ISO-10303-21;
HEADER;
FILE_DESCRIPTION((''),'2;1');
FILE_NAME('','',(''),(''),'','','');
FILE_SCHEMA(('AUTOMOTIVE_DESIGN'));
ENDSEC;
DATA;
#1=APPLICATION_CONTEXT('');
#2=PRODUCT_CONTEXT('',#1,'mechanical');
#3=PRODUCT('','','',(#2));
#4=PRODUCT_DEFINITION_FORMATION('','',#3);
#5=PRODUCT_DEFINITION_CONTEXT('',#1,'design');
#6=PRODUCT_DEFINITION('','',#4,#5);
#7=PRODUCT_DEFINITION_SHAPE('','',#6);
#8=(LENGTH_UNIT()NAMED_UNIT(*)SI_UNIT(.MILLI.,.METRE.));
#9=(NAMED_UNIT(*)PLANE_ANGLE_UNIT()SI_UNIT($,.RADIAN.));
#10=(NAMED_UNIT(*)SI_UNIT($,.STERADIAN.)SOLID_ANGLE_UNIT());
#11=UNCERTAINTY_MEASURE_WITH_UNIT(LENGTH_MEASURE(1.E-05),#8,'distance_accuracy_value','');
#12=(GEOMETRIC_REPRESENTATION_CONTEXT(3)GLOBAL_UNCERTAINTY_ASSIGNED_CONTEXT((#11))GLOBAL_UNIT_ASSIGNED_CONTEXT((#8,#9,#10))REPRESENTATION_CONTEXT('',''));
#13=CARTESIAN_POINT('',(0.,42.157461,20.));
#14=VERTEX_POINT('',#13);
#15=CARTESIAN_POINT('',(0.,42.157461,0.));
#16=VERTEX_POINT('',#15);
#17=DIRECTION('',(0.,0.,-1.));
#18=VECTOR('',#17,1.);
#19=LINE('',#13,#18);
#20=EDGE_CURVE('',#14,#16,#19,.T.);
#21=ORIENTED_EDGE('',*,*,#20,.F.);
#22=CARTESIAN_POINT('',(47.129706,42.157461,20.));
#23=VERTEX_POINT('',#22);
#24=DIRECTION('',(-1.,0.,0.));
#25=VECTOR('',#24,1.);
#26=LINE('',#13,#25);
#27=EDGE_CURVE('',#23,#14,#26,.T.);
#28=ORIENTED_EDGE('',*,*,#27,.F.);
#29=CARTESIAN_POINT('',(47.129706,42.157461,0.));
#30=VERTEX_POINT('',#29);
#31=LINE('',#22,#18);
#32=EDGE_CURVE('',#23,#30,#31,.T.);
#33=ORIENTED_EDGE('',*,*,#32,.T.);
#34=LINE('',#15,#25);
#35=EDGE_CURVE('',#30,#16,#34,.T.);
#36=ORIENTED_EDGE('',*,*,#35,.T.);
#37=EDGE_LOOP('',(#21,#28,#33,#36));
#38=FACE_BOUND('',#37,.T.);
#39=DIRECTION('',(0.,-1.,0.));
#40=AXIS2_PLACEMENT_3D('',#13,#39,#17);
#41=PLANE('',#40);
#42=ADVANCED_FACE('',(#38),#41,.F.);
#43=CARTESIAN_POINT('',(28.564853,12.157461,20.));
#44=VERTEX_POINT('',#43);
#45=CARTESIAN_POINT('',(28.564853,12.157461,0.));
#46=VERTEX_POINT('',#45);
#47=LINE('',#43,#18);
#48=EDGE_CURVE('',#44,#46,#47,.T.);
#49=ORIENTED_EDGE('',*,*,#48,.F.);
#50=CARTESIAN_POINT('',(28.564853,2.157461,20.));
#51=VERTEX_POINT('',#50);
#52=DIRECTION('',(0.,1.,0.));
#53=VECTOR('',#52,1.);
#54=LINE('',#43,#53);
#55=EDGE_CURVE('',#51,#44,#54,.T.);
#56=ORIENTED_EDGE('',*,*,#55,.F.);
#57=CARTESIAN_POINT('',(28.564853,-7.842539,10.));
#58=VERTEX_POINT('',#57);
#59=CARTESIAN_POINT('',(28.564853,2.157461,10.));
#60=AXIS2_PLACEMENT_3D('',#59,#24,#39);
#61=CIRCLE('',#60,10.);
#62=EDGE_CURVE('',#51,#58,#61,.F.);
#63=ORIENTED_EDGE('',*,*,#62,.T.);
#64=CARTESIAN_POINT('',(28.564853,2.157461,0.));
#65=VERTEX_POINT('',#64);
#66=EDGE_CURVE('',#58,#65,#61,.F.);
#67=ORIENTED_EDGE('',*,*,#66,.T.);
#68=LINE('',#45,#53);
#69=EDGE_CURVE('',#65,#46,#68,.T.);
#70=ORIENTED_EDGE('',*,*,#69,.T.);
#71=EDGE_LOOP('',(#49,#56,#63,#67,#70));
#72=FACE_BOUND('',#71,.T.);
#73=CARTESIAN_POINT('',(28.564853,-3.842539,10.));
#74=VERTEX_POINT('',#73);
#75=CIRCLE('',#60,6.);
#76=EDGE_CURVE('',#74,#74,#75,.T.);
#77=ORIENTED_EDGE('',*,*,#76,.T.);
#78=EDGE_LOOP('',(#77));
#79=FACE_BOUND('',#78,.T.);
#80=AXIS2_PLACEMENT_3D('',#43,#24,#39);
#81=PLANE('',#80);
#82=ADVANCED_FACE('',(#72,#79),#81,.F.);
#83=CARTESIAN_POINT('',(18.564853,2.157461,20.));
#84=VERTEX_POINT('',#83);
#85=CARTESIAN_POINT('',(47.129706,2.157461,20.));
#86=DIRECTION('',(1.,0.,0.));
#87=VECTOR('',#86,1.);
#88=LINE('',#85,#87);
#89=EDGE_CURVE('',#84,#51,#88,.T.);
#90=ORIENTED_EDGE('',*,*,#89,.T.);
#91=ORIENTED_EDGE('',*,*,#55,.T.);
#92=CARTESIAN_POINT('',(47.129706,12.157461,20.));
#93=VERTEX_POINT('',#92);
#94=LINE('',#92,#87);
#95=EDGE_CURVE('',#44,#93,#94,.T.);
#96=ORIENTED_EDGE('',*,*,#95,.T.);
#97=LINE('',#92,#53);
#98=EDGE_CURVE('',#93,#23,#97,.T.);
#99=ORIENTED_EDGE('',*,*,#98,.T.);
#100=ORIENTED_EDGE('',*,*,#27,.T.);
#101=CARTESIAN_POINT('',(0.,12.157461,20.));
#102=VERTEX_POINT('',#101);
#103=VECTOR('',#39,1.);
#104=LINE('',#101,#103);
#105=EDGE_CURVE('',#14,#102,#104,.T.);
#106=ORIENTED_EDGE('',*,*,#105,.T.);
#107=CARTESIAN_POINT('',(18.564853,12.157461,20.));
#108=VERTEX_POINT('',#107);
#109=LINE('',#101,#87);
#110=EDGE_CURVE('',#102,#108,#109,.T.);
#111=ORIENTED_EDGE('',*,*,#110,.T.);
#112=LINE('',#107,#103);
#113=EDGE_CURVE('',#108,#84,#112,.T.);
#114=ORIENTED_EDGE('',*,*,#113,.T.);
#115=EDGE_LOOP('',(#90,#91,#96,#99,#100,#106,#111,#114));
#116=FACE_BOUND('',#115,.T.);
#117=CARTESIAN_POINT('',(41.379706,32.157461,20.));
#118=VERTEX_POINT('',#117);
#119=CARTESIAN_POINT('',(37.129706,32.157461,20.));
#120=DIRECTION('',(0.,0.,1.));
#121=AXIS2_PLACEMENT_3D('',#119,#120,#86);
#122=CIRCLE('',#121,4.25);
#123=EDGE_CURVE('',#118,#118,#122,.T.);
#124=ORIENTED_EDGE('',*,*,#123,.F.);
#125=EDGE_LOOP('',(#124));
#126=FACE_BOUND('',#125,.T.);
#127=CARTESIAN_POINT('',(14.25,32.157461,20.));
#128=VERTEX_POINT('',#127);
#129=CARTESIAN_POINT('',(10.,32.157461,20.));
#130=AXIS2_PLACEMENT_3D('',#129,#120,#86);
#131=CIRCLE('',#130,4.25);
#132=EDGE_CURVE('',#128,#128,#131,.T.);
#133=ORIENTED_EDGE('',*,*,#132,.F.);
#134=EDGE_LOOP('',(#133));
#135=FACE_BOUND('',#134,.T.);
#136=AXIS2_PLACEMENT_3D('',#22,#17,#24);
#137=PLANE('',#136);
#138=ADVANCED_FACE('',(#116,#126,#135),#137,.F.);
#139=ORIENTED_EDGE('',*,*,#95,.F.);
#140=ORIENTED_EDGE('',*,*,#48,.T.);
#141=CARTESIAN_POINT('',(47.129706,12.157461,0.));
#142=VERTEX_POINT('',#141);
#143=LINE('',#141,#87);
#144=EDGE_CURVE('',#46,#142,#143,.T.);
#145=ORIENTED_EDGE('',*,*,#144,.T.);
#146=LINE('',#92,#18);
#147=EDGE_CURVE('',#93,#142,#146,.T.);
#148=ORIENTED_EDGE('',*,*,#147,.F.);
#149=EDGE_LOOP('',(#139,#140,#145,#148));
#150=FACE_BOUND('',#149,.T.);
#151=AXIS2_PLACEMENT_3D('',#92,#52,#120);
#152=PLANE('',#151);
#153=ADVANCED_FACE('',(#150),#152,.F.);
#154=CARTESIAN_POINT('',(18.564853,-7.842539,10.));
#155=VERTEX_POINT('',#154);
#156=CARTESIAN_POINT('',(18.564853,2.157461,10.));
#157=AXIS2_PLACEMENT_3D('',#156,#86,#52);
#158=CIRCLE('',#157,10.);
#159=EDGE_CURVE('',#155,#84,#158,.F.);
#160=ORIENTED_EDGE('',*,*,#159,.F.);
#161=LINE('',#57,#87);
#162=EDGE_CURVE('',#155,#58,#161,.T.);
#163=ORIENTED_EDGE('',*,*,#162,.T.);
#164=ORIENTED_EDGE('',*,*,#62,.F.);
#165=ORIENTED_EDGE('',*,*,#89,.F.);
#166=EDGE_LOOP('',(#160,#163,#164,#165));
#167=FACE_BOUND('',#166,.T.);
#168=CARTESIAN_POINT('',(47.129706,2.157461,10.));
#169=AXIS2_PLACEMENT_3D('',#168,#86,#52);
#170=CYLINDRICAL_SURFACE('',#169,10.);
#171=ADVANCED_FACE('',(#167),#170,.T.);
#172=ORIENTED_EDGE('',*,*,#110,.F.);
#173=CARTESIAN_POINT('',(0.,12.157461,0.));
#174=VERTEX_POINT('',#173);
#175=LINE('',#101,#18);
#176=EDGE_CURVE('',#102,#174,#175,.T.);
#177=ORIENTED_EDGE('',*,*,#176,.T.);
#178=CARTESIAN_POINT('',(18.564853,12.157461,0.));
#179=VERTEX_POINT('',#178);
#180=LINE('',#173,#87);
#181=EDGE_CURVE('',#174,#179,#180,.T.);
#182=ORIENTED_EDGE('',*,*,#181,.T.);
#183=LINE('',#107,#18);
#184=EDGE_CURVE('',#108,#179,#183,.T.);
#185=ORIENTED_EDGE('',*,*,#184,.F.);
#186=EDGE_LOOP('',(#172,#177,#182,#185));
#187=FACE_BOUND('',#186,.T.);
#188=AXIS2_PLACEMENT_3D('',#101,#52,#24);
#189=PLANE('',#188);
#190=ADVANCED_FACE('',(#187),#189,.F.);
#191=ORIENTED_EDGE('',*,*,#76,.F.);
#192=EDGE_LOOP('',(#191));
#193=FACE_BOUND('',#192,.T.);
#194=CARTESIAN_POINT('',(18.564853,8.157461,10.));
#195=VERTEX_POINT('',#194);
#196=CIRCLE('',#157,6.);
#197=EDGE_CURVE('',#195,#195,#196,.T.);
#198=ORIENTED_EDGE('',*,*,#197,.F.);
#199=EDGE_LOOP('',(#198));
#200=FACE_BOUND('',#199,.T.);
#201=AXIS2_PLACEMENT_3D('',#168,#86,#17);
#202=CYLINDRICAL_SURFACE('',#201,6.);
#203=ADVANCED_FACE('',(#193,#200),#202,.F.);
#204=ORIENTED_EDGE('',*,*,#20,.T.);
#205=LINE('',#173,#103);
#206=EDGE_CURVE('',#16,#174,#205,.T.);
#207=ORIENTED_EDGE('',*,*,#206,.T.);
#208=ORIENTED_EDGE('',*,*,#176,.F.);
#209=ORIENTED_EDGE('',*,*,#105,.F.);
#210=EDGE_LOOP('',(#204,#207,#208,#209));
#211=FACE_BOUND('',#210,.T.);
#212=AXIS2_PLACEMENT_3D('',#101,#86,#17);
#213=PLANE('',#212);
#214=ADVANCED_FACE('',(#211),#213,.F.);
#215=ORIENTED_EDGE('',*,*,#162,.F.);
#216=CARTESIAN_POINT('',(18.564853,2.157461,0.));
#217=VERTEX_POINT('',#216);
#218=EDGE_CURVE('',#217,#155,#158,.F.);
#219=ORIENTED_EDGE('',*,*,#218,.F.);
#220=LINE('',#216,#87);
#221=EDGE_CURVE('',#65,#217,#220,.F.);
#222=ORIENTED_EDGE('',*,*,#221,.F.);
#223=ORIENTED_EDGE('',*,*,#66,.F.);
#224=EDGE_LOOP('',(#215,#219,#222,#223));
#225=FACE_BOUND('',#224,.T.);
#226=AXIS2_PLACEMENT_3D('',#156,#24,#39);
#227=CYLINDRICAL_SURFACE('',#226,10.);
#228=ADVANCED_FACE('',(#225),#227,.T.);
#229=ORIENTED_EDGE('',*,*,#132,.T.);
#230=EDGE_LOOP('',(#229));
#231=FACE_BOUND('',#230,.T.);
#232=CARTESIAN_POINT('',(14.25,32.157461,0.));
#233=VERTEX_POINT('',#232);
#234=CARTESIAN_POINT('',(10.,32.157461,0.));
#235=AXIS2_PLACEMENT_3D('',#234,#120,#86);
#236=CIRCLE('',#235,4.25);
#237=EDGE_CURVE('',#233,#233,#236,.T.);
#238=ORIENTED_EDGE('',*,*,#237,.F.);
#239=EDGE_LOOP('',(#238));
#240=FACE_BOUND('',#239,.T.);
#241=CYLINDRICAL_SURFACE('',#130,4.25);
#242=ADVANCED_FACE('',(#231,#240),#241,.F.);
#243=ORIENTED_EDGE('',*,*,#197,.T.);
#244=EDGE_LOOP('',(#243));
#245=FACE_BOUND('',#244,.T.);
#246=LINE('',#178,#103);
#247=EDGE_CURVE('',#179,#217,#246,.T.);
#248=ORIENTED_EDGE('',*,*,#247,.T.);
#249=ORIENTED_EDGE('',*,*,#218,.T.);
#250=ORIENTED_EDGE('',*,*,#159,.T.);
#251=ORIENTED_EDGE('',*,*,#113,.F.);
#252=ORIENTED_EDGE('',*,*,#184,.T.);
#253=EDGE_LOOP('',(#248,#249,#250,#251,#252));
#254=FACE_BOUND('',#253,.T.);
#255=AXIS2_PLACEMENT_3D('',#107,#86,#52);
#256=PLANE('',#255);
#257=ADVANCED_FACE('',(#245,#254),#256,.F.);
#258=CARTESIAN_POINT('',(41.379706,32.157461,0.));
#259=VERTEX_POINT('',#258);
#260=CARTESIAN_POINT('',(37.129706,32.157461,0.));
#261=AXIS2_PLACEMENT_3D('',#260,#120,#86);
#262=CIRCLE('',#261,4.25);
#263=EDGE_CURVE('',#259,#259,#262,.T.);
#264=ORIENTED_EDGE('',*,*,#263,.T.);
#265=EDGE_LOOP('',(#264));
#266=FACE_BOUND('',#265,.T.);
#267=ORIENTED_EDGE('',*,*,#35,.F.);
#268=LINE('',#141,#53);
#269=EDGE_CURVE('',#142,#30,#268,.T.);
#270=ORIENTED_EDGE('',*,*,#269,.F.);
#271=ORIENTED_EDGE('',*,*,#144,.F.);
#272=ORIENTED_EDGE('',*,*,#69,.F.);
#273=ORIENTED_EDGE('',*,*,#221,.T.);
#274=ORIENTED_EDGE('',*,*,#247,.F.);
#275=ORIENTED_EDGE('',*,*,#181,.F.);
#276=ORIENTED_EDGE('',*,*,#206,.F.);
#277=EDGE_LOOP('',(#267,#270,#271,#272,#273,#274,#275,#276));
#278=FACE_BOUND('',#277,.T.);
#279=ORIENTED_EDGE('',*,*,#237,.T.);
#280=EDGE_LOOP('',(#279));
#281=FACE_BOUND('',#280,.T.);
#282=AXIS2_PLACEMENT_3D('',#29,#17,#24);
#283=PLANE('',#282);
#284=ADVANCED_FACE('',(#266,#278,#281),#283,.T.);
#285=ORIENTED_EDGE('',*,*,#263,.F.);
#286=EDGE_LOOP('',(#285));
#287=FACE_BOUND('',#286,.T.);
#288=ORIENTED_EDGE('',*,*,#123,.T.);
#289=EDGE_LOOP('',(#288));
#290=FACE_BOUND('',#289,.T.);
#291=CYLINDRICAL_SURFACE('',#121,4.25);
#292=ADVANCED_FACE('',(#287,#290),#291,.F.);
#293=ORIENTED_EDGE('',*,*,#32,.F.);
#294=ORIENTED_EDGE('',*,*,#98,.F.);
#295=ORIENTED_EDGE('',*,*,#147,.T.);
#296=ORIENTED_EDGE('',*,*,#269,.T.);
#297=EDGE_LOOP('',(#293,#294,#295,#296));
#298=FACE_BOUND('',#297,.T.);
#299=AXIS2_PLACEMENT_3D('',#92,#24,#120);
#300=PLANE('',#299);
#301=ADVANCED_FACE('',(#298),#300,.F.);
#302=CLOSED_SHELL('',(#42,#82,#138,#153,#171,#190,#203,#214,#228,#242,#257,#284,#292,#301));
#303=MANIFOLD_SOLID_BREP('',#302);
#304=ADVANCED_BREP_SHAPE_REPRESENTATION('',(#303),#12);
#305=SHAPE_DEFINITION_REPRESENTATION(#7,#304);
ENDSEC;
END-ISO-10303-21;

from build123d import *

# Parameters (mm, degrees)
EXTRUDE1_DEPTH                 = 20
F_12_0_12_DIAMETER_HOLE1_D     = 12
F_12_0_12_DIAMETER_HOLE1_DEPTH = 47.13
F_12_0_12_DIAMETER_HOLE1_TIP   = 3.605163714
F_8_5_8_5_DIAMETER_HOLE2_D     = 8.5
FILLET1_R                      = 10


with BuildPart() as part:
    # Sketch1 → Extrude1 (new body)
    with BuildSketch(Plane.XY):
        Polygon((0, 12.157460585), (18.564852768, 12.157460585), (18.564852768, -7.842539415), (28.564852768, -7.842539415), (28.564852768, 12.157460585), (47.129705535, 12.157460585), (47.129705535, 42.157460585), (0, 42.157460585), align=None)
    extrude(amount=EXTRUDE1_DEPTH)

    # Ø12.0 (12) Diameter Hole1
    with Locations(Plane(origin=(47.129705535, 2.157460585, 10), x_dir=(0, 0, 1), z_dir=(1, 0, 0))):
        with Locations((0, 0)):
            Hole(F_12_0_12_DIAMETER_HOLE1_D / 2, depth=F_12_0_12_DIAMETER_HOLE1_DEPTH)
            with Locations((0, 0, -(F_12_0_12_DIAMETER_HOLE1_DEPTH + F_12_0_12_DIAMETER_HOLE1_TIP / 2))):  # 118° drill point
                Cone(0, F_12_0_12_DIAMETER_HOLE1_D / 2, F_12_0_12_DIAMETER_HOLE1_TIP, mode=Mode.SUBTRACT)

    # Ø8.5 (8.5) Diameter Hole2 (through all)
    with Locations(Plane(origin=(37.129705535, 32.157460585, 20), x_dir=(1, 0, 0), z_dir=(0, 0, 1))):
        with Locations((0, 0), (-27.129705535, 0)):
            Hole(F_8_5_8_5_DIAMETER_HOLE2_D / 2)

    # Fillet1
    fillet1_edges = [part.edges().sort_by_distance(p)[0] for p in [
        (23.564852768, -7.842539415, 20),
        (23.564852768, -7.842539415, 0),
    ]]
    fillet(fillet1_edges, radius=FILLET1_R - 0.0001)  # a hair under: the kernel refuses the full size


solid = part.part
